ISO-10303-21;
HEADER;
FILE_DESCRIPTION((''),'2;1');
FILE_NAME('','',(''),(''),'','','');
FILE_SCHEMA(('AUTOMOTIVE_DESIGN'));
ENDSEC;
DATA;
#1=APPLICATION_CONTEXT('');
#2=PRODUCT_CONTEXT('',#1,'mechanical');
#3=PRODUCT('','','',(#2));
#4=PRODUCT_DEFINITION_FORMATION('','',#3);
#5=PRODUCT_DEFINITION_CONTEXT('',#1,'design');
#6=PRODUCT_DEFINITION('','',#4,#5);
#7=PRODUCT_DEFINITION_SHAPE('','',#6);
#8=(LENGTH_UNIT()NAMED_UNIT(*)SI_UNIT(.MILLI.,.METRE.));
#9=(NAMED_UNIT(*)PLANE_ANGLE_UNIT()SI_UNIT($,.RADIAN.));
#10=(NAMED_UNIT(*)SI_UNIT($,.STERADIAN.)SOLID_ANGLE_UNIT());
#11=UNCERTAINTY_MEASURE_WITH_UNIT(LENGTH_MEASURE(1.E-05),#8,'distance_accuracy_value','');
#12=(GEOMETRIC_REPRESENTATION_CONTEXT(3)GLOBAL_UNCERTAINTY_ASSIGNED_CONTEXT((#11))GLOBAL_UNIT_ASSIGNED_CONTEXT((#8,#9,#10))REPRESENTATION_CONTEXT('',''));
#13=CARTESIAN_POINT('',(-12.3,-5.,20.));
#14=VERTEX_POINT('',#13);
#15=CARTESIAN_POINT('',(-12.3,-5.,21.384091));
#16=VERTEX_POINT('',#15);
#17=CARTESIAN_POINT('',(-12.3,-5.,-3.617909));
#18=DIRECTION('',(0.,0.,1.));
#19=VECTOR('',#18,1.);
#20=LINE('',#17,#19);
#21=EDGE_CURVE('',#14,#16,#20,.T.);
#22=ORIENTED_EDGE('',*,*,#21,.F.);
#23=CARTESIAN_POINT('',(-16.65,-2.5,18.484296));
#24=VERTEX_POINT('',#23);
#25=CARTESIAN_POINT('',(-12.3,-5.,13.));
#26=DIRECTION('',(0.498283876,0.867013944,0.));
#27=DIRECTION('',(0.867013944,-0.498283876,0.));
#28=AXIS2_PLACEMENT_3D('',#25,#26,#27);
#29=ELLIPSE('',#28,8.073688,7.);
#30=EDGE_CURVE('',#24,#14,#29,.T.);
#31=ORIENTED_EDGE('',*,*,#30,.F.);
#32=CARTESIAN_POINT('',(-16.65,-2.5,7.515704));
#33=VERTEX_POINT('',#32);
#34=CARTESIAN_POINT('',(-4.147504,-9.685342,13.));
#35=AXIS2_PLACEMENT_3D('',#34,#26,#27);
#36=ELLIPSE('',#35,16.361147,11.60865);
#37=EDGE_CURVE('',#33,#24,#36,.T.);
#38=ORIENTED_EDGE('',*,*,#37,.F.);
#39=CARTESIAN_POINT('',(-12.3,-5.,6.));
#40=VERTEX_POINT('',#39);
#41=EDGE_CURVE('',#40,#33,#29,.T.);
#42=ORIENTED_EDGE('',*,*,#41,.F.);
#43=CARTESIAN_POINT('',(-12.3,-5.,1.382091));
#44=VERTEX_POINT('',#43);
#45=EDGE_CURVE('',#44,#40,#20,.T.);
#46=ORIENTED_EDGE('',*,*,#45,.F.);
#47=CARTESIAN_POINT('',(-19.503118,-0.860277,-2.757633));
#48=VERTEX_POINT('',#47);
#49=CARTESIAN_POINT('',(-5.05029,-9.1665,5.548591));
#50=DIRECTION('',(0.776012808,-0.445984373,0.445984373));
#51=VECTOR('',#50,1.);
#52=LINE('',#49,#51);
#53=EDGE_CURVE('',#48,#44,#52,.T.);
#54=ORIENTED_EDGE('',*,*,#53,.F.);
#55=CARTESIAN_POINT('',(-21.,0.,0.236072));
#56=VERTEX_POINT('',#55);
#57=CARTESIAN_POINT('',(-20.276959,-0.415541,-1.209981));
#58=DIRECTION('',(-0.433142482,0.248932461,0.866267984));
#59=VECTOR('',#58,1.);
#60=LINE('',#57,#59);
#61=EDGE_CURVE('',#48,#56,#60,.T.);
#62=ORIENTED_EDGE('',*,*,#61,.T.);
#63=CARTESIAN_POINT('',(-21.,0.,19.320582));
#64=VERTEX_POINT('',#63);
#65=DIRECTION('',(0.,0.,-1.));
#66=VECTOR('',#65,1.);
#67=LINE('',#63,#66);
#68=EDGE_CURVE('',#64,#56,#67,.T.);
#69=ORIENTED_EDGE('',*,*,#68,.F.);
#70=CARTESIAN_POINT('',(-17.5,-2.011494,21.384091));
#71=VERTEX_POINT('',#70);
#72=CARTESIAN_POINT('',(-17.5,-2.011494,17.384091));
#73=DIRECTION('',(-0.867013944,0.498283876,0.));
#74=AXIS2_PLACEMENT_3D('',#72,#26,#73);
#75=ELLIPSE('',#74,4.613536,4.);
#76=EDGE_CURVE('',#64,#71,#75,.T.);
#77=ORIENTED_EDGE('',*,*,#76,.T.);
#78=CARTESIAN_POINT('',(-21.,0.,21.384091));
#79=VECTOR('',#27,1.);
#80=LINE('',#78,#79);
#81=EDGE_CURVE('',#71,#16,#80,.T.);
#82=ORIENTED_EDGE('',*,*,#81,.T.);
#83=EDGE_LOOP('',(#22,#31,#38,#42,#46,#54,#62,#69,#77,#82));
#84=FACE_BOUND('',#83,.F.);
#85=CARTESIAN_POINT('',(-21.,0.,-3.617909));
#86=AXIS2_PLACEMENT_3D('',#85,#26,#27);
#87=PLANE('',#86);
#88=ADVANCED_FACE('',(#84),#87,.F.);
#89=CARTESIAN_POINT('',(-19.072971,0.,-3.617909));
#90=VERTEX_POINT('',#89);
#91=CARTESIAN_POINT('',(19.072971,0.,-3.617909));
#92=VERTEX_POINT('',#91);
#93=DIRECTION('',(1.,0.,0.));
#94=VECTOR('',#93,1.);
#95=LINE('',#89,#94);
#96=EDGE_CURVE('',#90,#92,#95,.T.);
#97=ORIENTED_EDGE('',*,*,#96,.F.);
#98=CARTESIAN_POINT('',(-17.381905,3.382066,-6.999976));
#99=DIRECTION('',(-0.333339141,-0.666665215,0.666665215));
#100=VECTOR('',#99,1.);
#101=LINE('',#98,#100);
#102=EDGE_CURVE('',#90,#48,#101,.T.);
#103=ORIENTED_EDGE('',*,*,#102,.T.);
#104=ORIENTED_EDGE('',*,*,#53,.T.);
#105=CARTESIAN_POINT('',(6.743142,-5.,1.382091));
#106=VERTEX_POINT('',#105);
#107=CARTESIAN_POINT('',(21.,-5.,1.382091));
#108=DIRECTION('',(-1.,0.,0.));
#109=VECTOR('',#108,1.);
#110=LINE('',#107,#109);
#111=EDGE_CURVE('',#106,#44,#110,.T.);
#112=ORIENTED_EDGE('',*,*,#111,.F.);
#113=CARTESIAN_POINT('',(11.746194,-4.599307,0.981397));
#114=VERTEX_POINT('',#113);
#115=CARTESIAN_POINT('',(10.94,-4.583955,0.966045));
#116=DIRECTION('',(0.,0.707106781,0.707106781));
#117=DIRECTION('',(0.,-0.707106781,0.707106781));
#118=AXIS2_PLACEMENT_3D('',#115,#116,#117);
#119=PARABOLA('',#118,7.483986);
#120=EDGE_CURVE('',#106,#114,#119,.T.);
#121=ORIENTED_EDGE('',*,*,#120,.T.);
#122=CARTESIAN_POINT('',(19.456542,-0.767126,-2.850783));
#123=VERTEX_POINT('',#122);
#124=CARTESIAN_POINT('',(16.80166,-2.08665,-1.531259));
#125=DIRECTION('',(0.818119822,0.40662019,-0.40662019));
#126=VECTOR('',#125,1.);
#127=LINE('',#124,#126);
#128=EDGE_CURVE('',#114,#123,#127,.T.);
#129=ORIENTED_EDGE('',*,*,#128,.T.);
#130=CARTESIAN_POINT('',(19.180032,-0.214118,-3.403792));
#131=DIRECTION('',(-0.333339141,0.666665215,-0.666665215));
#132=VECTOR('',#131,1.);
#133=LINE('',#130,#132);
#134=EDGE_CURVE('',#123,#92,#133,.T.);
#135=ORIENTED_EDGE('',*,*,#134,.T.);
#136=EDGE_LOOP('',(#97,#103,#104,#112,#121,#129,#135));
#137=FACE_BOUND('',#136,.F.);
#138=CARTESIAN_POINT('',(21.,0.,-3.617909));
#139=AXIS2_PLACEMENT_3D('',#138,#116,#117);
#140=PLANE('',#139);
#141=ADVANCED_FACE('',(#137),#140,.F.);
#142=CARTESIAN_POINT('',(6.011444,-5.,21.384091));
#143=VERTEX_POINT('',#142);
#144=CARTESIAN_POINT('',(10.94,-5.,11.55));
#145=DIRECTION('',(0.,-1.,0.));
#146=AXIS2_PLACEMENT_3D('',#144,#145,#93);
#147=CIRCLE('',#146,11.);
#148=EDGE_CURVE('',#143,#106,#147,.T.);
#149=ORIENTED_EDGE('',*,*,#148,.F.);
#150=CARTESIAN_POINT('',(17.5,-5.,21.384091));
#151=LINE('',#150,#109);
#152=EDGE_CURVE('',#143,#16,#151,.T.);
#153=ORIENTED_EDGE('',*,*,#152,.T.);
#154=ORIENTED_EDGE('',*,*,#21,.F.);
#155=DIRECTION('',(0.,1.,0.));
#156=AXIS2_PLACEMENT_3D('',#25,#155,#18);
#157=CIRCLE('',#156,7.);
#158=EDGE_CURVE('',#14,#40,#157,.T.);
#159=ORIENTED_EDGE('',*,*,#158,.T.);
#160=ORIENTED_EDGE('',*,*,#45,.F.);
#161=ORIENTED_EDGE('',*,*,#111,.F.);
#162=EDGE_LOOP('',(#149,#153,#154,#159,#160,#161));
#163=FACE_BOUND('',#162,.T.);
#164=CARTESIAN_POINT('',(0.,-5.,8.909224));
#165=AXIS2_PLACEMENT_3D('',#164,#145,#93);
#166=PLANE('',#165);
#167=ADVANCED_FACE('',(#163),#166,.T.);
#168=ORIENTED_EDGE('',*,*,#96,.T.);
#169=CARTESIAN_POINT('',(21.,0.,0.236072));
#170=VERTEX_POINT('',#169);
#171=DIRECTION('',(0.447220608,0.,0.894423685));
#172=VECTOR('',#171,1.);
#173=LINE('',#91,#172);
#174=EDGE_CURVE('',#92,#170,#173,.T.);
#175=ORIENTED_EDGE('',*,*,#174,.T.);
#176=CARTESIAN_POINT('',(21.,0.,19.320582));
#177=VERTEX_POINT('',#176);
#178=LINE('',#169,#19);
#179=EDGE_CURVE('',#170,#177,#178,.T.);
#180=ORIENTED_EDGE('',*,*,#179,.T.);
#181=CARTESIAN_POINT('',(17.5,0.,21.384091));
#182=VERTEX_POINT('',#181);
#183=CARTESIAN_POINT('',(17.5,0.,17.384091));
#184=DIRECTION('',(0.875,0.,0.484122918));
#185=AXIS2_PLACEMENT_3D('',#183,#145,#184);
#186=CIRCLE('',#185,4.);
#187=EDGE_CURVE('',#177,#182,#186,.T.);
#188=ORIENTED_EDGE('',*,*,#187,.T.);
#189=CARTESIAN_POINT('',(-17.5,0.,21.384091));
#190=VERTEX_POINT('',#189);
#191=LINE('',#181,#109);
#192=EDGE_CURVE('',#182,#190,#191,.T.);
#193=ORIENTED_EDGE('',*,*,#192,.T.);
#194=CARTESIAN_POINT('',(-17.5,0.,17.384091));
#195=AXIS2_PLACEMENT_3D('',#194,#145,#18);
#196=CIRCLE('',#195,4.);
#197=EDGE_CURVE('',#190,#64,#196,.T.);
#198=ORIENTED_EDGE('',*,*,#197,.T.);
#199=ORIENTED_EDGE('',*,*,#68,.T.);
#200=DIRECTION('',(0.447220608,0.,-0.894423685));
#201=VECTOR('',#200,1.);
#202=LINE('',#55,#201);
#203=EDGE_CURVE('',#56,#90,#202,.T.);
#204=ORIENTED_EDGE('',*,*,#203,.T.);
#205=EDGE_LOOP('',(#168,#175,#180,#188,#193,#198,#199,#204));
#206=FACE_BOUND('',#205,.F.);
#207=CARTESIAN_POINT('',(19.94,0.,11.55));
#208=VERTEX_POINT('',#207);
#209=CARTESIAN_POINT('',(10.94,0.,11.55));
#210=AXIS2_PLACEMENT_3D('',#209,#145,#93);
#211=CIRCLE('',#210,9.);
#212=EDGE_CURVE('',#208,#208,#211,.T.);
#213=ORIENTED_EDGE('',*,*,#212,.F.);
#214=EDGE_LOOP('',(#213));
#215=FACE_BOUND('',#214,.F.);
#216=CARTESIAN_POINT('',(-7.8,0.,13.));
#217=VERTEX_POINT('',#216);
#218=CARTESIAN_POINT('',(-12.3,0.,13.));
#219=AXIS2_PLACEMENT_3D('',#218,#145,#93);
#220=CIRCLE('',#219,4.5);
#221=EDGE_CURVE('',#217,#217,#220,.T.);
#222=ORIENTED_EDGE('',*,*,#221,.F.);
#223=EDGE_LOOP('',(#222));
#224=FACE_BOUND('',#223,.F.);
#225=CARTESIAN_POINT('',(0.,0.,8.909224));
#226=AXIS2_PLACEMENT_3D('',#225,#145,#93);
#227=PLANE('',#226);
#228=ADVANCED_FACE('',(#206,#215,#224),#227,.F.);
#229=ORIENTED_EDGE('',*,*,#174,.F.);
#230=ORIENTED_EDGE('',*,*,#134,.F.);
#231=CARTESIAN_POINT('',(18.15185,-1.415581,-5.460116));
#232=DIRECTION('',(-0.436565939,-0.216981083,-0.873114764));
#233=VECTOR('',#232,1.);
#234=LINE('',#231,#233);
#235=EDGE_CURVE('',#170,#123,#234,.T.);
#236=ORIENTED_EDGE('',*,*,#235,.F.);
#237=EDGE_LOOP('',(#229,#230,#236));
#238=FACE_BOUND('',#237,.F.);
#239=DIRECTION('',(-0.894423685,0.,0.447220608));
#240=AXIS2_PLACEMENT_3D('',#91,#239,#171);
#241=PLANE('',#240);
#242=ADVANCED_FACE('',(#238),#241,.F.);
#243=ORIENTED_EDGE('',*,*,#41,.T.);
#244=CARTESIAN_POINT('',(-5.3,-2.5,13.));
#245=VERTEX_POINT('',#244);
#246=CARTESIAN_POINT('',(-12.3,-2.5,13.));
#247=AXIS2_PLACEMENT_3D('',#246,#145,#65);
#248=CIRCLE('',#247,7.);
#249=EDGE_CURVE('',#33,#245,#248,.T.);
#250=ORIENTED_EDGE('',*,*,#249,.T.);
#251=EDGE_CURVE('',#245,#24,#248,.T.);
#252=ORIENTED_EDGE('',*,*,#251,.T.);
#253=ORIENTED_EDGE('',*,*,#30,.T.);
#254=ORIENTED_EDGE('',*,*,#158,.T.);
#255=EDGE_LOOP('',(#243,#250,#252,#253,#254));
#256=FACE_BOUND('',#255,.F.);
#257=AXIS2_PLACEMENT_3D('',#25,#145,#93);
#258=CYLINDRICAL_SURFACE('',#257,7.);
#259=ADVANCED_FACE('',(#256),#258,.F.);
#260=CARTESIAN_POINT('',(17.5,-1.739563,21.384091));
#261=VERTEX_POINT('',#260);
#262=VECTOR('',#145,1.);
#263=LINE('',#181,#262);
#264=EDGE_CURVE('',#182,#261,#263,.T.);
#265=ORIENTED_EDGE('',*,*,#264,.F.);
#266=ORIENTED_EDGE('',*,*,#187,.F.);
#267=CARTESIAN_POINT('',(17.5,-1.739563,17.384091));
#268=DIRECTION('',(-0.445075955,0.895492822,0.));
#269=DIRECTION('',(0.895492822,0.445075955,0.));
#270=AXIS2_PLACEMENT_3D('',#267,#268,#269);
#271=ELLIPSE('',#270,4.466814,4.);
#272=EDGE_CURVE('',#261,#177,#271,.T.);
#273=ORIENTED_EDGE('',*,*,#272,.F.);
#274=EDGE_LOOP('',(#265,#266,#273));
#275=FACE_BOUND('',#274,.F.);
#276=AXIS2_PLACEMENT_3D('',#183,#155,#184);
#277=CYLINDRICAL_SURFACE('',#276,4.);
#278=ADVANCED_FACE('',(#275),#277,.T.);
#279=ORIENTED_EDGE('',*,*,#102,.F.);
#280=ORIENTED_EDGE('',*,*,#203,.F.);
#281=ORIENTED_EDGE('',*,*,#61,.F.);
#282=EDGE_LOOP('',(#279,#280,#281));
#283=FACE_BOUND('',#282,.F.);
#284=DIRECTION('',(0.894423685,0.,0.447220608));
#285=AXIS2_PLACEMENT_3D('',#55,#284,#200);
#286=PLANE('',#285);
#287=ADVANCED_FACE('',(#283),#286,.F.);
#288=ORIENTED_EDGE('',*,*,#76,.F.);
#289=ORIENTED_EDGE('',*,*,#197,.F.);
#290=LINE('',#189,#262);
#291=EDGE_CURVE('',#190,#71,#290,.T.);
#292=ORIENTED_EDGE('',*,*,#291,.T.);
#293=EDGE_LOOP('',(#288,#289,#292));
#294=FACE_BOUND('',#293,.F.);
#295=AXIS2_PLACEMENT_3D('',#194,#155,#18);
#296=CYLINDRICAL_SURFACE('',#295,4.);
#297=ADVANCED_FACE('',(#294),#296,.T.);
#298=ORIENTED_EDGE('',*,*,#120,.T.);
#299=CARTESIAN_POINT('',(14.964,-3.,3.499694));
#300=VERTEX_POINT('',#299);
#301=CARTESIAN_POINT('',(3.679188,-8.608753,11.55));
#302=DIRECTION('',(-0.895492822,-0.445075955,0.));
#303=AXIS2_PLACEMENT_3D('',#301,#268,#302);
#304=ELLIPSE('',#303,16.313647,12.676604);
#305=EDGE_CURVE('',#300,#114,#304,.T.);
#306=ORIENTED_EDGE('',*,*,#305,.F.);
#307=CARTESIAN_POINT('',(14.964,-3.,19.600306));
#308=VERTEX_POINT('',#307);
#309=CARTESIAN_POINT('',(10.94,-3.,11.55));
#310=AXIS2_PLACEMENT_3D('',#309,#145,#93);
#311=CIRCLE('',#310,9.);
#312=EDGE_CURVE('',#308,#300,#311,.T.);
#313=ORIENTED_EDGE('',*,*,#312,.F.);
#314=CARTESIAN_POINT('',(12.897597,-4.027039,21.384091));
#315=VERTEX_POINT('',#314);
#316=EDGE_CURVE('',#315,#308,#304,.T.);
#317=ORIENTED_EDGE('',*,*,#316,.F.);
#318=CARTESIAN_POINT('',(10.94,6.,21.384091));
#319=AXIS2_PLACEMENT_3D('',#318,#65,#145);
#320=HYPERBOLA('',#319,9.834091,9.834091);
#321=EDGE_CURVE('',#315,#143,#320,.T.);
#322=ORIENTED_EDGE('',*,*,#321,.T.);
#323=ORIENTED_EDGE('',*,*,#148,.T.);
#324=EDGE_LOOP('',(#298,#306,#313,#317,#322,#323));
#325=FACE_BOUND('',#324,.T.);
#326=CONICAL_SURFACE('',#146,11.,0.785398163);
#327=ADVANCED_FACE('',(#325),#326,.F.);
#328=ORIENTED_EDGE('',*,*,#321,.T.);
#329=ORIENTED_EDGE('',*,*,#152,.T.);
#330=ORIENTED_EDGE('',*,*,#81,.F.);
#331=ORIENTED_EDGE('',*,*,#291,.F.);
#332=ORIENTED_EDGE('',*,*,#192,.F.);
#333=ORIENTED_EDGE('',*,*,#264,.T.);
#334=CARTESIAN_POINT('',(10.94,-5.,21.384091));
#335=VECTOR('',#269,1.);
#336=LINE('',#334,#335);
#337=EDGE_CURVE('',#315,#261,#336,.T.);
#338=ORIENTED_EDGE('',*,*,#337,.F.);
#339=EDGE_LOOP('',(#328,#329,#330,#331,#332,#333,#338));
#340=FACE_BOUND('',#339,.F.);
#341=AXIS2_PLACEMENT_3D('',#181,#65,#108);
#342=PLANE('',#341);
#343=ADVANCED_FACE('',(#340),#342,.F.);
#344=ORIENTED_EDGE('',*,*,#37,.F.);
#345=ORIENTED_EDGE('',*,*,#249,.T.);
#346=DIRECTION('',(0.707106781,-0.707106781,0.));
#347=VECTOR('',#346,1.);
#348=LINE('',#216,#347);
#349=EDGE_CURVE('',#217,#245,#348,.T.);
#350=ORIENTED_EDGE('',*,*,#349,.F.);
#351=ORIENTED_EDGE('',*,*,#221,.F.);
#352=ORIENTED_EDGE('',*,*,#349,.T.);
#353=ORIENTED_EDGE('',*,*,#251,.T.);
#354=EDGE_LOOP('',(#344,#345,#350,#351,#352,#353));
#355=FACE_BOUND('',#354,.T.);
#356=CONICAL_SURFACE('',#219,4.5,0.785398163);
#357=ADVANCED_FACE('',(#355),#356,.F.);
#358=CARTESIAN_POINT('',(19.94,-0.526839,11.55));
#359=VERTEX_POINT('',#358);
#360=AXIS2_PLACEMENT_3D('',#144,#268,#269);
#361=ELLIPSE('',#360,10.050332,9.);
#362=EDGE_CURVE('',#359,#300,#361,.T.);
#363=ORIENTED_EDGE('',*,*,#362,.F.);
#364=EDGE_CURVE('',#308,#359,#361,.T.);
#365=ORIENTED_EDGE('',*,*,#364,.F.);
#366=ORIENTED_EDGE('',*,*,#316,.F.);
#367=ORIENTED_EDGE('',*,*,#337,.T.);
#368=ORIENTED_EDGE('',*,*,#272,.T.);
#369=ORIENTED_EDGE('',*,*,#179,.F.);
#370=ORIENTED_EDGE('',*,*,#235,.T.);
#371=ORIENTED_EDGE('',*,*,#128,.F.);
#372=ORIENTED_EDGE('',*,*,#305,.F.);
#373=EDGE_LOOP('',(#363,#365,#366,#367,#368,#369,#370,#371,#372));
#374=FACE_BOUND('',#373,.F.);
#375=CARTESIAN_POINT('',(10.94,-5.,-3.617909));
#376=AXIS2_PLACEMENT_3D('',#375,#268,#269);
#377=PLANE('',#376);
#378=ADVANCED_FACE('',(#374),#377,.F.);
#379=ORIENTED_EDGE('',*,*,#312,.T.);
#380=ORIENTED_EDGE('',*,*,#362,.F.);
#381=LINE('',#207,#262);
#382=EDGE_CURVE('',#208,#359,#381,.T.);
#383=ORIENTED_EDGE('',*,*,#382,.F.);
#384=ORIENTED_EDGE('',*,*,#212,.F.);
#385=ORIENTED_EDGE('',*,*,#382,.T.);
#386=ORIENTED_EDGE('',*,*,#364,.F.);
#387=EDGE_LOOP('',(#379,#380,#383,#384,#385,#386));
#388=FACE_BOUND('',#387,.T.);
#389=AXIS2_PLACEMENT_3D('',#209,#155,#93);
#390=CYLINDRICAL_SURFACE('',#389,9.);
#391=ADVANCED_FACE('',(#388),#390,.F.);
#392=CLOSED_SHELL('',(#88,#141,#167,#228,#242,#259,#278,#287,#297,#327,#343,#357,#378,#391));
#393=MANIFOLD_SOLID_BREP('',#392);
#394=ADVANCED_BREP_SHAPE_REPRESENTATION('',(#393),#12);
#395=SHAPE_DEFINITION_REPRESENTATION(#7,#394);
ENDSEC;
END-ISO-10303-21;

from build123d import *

# Parameters (mm, degrees)
F1_R        = 4.5
F1_R_2      = 9
F2_DEPTH    = 5
F3_R        = 7
F4_DEPTH    = 2
F6_S5_R     = 7
F6_T6_DEPTH = 12
F8_DEPTH    = 25.002
F11_REACH   = 49.0720678119


# Not quite as in the source:
# - a fillet or chamfer that OpenCascade refuses, or shapes differently, is made with other operations: its cross-section is extruded or revolved along the edge and cut away or added


with BuildPart() as f2:
    # F1 (on Front) → F2 (new body)
    with BuildSketch(Plane.XZ):
        with BuildLine():
            ThreePointArc((-17.5, 21.3840905163), (-19.5315060063, 20.829810085), (-21, 19.3205821894))
            Line((-21, 19.3205821894), (-21, 0.2360721162))
            Line((-21, 0.2360721162), (-19.0729714288, -3.6179094837))
            Line((-19.0729714288, -3.6179094837), (19.0729714288, -3.6179094837))
            Line((19.0729714288, -3.6179094837), (21, 0.2360721162))
            Line((21, 0.2360721162), (21, 19.3205821894))
            ThreePointArc((21, 19.3205821894), (19.5315060063, 20.829810085), (17.5, 21.3840905163))
            Line((17.5, 21.3840905163), (-17.5, 21.3840905163))
        make_face()
        with Locations((-12.3, 13)):
            Circle(F1_R, mode=Mode.SUBTRACT)
        with Locations((10.94, 11.55)):
            Circle(F1_R_2, mode=Mode.SUBTRACT)
    extrude(amount=F2_DEPTH)

    # F3 (on face) → F4 (cut)
    with BuildSketch(Plane.XZ.offset(5)):
        with Locations((-12.3, 13)):
            Circle(F3_R)
    extrude(amount=-F4_DEPTH, mode=Mode.SUBTRACT)

    # F5: chamfer of 2 on 1 edges, made by hand

    # F5_s1 → F5_t2 (revolve, cut)
    with BuildSketch(Plane.XY.offset(11.55)):
        Polygon((21.94, -5), (19.94, -3), (19.94, -5), align=None)
    revolve(axis=Axis((10.94, -5, 11.55), (0, -1, 0)), mode=Mode.SUBTRACT)

    # F6: chamfer of 3 on 1 edges, made by hand


with BuildPart() as f6_tool2:
    # F6_s3 → F6_t4 (revolve)
    with BuildSketch(Plane.XY.offset(13)):
        Polygon((-7.8, 0), (-4.8, -3), (-7.8, -3), align=None)
    revolve(axis=Axis((-12.3, -3, 13), (0, 1, 0)))

    # F6_s5 → F6_t6 (intersect, symmetric)
    with BuildSketch(Plane.XZ.offset(1.5)):
        with Locations((-12.3, 13)):
            Circle(F6_S5_R)
    extrude(amount=F6_T6_DEPTH, both=True, mode=Mode.INTERSECT)


with BuildPart() as f2_1:
    add(f2.part)

    # F6_t1: cut F6_tool2
    add(f6_tool2.part, mode=Mode.SUBTRACT)

    # F7 (on face) → F8 (cut, through all)
    with BuildSketch(Plane(origin=(0, 0, -3.6179094837), x_dir=(1, 0, 0), z_dir=(0, 0, -1))):
        Polygon((-21, 5), (-21, 0), (-12.3, 5), align=None)
        Polygon((21, 5), (10.94, 5), (21, 0), align=None)
    extrude(amount=-F8_DEPTH, mode=Mode.SUBTRACT)

    f11_end = Plane(origin=(-17.3406659547, -2.1030655433, 7.002775246), x_dir=(-0.867013944, 0.4982838759, 0), z_dir=(-0.4982838759, -0.867013944, 0))
    # F10 (on offset) → F11 (cut, up to a plane its end follows)
    with BuildSketch(Plane.YZ.offset(21)):
        Polygon((-5, -3.6179094837), (0, -3.6179094837), (-5, 1.3820905163), align=None)
    f11_long = extrude(amount=-F11_REACH, mode=Mode.PRIVATE)
    add(split(f11_long, bisect_by=f11_end, keep=Keep.BOTTOM, mode=Mode.PRIVATE), mode=Mode.SUBTRACT)


solid = f2_1.part
